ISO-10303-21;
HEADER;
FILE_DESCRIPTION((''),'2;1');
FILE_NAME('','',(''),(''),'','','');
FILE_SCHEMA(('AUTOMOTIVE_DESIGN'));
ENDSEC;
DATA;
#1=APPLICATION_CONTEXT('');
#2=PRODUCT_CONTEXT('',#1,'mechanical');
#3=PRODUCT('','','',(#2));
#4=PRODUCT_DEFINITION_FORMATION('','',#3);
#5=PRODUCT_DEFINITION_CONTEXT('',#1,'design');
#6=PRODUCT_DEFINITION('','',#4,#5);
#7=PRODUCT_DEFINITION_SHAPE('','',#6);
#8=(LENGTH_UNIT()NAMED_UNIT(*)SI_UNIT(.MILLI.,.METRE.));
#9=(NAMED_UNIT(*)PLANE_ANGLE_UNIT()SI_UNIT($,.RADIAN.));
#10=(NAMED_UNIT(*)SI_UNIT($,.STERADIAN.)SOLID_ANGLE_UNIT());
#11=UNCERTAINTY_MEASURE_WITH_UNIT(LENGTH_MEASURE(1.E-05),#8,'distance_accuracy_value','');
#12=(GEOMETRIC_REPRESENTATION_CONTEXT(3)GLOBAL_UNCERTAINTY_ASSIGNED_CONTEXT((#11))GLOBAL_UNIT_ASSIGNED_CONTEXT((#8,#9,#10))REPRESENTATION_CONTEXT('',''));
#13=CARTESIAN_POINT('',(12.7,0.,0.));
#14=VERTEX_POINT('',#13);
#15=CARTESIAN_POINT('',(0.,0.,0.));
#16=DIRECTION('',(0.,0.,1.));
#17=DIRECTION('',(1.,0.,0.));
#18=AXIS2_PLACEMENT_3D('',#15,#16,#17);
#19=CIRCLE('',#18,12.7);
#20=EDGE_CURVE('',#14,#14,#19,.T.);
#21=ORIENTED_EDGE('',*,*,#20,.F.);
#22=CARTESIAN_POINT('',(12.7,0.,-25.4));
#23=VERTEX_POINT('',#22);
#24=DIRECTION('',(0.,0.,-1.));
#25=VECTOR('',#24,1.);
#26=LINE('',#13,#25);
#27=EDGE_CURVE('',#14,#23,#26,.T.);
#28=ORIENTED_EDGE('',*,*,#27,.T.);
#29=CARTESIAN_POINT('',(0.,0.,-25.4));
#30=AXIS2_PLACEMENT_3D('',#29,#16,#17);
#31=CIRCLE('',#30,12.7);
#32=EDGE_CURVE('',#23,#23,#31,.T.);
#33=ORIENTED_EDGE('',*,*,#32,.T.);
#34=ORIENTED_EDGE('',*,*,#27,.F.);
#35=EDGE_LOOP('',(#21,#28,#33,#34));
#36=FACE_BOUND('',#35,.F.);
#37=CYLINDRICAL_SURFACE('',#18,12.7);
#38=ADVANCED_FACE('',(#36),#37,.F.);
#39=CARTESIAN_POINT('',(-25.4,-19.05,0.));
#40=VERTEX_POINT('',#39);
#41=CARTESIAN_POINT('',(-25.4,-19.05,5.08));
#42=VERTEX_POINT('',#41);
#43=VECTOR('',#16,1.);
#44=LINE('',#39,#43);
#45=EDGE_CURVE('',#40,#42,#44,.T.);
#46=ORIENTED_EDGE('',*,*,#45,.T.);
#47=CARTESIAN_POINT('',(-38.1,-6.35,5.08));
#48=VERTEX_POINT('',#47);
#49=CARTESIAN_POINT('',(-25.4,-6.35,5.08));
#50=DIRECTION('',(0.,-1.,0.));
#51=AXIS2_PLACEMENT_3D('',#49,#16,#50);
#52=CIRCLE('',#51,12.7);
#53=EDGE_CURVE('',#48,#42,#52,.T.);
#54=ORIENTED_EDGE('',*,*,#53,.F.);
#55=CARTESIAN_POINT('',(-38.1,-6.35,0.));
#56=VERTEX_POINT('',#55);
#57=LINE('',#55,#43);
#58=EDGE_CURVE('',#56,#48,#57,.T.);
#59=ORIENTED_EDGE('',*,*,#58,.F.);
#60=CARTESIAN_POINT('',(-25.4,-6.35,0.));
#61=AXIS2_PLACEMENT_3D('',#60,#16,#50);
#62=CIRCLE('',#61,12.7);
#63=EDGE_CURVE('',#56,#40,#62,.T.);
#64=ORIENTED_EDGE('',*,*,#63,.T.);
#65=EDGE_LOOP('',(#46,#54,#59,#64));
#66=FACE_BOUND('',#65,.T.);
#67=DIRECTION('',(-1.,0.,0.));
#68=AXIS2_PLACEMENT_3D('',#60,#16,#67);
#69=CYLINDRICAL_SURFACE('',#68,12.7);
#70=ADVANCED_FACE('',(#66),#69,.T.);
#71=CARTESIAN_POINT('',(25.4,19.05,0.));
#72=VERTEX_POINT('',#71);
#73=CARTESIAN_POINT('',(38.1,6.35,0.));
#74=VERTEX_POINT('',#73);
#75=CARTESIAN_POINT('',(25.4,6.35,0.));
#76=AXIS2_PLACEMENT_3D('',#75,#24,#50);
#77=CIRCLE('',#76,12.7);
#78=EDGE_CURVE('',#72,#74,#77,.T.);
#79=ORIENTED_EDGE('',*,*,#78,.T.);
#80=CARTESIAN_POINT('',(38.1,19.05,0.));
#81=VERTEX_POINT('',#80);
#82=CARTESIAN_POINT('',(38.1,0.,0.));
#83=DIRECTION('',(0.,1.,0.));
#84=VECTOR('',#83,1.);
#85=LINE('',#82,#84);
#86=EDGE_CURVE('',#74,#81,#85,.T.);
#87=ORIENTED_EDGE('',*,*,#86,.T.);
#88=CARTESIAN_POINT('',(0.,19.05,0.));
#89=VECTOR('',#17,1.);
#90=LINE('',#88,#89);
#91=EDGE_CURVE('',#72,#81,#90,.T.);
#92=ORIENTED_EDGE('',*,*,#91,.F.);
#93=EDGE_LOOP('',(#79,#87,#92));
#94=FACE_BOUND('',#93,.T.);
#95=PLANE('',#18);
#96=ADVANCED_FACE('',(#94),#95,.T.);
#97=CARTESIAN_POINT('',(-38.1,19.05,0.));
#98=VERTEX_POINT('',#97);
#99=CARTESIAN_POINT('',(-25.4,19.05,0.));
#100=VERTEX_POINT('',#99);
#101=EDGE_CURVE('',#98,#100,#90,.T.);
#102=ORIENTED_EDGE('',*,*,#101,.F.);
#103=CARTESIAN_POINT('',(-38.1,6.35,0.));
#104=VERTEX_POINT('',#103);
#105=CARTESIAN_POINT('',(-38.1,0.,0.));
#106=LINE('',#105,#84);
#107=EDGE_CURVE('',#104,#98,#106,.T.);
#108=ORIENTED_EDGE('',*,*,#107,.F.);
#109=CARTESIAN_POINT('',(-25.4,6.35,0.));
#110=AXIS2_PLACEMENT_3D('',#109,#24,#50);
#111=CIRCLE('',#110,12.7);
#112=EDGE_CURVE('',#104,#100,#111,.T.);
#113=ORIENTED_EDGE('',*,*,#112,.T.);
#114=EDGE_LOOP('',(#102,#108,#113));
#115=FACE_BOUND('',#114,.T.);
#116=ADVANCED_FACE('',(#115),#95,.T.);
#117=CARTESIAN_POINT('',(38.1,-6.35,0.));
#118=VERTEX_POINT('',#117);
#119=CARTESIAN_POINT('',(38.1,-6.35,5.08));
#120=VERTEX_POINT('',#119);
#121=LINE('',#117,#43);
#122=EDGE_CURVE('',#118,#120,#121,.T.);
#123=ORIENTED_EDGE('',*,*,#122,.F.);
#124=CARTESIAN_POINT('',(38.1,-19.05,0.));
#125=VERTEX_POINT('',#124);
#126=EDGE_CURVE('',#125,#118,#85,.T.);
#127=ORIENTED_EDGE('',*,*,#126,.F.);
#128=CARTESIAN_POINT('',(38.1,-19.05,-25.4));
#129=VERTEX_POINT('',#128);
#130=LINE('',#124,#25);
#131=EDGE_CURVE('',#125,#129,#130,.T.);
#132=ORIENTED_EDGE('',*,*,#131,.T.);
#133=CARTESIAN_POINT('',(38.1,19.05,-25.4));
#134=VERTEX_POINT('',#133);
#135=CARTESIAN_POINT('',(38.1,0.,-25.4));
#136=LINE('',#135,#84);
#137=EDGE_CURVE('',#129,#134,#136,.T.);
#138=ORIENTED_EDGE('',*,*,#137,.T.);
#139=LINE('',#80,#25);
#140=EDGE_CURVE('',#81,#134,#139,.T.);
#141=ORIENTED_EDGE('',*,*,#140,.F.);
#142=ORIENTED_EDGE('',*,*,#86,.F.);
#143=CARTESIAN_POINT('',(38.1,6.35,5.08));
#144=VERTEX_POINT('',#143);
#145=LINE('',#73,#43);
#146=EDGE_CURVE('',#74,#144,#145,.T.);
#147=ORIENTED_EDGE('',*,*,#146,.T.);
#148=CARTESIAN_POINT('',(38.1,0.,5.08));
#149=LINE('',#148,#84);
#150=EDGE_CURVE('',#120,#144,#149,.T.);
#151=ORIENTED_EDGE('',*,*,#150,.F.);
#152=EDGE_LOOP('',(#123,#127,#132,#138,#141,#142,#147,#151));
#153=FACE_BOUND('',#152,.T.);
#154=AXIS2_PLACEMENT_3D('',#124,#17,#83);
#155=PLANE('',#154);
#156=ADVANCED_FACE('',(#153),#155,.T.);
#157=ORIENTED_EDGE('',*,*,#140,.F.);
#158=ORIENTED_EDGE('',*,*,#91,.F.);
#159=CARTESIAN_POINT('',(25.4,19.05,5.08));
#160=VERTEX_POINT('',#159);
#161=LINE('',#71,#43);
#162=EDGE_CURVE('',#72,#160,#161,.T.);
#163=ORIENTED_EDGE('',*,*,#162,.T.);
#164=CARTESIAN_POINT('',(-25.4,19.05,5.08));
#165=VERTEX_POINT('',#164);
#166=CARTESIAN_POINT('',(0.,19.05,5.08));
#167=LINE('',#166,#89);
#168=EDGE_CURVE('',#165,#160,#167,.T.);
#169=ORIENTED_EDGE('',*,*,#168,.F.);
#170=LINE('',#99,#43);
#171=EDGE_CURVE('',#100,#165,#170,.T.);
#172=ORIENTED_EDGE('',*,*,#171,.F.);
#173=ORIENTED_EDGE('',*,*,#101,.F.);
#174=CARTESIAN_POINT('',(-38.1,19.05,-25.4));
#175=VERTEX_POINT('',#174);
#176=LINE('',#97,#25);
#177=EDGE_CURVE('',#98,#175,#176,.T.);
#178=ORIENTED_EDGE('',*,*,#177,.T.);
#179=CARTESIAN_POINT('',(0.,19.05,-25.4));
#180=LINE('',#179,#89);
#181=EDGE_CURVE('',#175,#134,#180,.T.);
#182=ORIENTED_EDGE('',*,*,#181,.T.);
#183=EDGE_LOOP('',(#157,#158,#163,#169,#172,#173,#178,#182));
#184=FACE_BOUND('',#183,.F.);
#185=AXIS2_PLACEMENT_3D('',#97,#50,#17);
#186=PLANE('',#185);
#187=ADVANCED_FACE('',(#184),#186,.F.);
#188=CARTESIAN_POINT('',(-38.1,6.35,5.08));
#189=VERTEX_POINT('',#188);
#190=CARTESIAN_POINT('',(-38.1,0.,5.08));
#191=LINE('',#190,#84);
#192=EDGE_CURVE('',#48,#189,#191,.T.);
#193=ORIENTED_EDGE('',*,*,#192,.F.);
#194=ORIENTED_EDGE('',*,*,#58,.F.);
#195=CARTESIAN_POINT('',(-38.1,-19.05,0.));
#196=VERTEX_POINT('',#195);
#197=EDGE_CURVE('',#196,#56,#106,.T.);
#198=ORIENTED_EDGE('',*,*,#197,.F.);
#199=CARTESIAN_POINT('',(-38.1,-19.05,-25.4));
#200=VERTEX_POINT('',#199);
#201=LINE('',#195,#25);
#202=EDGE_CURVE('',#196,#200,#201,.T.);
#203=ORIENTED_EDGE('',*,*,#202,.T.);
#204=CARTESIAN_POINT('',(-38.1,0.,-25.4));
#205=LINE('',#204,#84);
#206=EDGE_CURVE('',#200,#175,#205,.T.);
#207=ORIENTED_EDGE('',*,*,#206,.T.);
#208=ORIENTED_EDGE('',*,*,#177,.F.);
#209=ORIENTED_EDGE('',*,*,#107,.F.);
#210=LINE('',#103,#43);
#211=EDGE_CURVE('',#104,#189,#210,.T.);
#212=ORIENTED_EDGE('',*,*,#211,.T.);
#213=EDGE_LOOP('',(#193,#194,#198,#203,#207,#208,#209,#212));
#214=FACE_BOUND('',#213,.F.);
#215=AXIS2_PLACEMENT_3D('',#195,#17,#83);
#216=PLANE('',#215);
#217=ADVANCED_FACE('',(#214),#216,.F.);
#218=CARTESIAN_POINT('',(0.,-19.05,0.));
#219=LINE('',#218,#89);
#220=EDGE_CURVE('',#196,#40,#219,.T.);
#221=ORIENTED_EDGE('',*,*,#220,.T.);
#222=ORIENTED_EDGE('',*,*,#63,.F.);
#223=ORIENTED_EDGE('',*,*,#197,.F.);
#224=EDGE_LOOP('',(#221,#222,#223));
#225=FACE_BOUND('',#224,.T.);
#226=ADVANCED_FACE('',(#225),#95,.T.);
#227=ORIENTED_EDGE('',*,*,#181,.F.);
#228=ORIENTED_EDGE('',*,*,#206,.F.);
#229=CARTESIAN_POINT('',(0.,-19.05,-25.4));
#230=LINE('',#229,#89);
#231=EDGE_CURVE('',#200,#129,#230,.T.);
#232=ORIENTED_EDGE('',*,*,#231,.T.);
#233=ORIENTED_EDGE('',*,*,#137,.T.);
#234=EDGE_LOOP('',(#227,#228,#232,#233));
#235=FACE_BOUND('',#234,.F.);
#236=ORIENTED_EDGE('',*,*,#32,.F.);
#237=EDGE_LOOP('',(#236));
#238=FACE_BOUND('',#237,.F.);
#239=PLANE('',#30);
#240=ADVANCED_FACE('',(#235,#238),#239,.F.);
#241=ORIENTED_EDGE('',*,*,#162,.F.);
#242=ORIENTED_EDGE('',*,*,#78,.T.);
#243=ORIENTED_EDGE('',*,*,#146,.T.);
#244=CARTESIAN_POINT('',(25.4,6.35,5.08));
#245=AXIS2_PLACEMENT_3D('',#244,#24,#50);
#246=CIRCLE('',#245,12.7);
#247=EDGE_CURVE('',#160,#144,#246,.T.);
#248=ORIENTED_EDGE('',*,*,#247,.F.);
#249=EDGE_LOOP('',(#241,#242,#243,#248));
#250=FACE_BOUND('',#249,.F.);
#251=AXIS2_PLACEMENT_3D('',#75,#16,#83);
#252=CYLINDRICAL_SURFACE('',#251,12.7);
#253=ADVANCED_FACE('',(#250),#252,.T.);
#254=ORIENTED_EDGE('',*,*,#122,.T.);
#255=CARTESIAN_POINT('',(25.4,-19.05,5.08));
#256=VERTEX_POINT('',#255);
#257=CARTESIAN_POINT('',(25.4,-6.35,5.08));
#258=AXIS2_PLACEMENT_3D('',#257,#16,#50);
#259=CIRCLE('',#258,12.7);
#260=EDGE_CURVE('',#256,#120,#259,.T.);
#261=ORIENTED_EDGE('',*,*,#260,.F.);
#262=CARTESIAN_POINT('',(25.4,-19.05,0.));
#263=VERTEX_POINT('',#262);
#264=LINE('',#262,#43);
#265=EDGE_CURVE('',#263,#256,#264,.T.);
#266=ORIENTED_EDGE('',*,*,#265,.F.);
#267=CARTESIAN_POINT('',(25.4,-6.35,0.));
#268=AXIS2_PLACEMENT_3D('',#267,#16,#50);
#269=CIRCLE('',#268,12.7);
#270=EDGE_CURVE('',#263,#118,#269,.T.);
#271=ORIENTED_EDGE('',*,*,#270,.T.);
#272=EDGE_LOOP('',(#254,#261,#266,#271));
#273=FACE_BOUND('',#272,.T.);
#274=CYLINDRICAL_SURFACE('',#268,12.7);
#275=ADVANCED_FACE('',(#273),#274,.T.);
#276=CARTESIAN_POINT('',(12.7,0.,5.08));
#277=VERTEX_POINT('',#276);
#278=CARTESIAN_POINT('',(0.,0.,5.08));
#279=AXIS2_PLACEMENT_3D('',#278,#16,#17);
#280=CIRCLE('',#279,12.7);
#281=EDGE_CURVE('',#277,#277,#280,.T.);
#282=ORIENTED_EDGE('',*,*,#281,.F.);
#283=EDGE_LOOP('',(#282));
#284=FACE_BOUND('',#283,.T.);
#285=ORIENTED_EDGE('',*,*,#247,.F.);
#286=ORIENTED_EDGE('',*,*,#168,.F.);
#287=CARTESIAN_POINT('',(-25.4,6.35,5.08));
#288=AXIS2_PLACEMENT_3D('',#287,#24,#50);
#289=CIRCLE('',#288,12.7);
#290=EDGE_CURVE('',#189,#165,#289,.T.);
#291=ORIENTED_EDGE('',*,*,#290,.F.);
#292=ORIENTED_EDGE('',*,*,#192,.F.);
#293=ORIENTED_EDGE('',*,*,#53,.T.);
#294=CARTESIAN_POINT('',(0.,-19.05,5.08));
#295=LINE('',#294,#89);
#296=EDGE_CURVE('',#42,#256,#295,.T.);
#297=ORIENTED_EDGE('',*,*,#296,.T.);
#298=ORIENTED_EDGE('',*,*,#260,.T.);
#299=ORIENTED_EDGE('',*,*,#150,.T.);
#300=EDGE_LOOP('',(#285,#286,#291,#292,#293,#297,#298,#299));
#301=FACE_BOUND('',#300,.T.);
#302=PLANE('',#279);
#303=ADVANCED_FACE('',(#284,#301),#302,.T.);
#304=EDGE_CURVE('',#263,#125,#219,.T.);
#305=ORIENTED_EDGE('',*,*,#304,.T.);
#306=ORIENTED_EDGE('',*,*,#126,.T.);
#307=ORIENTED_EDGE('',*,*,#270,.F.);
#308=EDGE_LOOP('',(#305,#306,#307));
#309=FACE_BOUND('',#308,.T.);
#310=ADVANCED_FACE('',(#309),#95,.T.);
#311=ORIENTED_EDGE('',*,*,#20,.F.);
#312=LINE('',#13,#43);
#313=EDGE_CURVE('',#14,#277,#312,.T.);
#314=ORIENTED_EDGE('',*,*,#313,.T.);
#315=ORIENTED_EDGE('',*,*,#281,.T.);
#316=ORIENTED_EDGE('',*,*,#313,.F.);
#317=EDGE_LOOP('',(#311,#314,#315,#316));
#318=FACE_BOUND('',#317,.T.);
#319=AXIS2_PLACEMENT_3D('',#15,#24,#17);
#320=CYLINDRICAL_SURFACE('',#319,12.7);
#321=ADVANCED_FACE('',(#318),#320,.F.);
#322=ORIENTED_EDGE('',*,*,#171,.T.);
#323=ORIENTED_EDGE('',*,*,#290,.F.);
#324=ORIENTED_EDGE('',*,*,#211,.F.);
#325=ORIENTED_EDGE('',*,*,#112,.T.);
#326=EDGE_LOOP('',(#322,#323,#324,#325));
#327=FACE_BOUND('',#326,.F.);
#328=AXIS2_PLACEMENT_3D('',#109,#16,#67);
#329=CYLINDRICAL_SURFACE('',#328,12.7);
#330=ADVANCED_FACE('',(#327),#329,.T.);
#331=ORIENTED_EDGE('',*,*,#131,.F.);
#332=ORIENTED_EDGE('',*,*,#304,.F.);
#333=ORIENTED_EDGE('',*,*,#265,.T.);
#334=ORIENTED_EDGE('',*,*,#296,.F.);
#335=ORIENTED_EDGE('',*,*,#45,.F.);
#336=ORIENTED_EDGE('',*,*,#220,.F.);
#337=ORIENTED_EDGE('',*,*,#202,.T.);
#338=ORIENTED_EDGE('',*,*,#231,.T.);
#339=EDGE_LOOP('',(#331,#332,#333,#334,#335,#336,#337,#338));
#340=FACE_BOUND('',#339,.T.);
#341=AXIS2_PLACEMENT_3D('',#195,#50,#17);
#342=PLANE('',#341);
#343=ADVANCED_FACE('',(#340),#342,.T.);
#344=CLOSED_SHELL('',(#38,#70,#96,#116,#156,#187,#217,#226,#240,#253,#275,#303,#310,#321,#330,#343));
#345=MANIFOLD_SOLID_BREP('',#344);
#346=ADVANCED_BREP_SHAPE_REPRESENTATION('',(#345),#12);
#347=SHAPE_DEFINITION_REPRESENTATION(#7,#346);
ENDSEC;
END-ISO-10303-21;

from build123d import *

# Parameters (mm, degrees)
F1_W     = 76.2
F1_H     = 38.1
F1_R     = 12.7
F2_DEPTH = 5.08
F3_R     = 12.7
F4_DEPTH = 25.4


# Not quite as in the source:
# - a variable given as a bare number and used for a length is read in inches; the dataset says mm whatever the document's units were


with BuildPart() as f2:
    # F1 (on Top) → F2 (new body)
    with BuildSketch(Plane.XY):
        Rectangle(F1_W, F1_H)
        Circle(F1_R, mode=Mode.SUBTRACT)
    extrude(amount=F2_DEPTH)

    # F3
    f3_edges = [f2.edges().sort_by_distance(p)[0] for p in [
        (38.1, -19.05, 2.54),
        (38.1, 19.05, 2.54),
        (-38.1, -19.05, 2.54),
        (-38.1, 19.05, 2.54),
    ]]
    fillet(f3_edges, radius=F3_R)

    # F1 (on Top) → F4 (join)
    with BuildSketch(Plane.XY):
        Rectangle(F1_W, F1_H)
        Circle(F1_R, mode=Mode.SUBTRACT)
    extrude(amount=-F4_DEPTH)


solid = f2.part
